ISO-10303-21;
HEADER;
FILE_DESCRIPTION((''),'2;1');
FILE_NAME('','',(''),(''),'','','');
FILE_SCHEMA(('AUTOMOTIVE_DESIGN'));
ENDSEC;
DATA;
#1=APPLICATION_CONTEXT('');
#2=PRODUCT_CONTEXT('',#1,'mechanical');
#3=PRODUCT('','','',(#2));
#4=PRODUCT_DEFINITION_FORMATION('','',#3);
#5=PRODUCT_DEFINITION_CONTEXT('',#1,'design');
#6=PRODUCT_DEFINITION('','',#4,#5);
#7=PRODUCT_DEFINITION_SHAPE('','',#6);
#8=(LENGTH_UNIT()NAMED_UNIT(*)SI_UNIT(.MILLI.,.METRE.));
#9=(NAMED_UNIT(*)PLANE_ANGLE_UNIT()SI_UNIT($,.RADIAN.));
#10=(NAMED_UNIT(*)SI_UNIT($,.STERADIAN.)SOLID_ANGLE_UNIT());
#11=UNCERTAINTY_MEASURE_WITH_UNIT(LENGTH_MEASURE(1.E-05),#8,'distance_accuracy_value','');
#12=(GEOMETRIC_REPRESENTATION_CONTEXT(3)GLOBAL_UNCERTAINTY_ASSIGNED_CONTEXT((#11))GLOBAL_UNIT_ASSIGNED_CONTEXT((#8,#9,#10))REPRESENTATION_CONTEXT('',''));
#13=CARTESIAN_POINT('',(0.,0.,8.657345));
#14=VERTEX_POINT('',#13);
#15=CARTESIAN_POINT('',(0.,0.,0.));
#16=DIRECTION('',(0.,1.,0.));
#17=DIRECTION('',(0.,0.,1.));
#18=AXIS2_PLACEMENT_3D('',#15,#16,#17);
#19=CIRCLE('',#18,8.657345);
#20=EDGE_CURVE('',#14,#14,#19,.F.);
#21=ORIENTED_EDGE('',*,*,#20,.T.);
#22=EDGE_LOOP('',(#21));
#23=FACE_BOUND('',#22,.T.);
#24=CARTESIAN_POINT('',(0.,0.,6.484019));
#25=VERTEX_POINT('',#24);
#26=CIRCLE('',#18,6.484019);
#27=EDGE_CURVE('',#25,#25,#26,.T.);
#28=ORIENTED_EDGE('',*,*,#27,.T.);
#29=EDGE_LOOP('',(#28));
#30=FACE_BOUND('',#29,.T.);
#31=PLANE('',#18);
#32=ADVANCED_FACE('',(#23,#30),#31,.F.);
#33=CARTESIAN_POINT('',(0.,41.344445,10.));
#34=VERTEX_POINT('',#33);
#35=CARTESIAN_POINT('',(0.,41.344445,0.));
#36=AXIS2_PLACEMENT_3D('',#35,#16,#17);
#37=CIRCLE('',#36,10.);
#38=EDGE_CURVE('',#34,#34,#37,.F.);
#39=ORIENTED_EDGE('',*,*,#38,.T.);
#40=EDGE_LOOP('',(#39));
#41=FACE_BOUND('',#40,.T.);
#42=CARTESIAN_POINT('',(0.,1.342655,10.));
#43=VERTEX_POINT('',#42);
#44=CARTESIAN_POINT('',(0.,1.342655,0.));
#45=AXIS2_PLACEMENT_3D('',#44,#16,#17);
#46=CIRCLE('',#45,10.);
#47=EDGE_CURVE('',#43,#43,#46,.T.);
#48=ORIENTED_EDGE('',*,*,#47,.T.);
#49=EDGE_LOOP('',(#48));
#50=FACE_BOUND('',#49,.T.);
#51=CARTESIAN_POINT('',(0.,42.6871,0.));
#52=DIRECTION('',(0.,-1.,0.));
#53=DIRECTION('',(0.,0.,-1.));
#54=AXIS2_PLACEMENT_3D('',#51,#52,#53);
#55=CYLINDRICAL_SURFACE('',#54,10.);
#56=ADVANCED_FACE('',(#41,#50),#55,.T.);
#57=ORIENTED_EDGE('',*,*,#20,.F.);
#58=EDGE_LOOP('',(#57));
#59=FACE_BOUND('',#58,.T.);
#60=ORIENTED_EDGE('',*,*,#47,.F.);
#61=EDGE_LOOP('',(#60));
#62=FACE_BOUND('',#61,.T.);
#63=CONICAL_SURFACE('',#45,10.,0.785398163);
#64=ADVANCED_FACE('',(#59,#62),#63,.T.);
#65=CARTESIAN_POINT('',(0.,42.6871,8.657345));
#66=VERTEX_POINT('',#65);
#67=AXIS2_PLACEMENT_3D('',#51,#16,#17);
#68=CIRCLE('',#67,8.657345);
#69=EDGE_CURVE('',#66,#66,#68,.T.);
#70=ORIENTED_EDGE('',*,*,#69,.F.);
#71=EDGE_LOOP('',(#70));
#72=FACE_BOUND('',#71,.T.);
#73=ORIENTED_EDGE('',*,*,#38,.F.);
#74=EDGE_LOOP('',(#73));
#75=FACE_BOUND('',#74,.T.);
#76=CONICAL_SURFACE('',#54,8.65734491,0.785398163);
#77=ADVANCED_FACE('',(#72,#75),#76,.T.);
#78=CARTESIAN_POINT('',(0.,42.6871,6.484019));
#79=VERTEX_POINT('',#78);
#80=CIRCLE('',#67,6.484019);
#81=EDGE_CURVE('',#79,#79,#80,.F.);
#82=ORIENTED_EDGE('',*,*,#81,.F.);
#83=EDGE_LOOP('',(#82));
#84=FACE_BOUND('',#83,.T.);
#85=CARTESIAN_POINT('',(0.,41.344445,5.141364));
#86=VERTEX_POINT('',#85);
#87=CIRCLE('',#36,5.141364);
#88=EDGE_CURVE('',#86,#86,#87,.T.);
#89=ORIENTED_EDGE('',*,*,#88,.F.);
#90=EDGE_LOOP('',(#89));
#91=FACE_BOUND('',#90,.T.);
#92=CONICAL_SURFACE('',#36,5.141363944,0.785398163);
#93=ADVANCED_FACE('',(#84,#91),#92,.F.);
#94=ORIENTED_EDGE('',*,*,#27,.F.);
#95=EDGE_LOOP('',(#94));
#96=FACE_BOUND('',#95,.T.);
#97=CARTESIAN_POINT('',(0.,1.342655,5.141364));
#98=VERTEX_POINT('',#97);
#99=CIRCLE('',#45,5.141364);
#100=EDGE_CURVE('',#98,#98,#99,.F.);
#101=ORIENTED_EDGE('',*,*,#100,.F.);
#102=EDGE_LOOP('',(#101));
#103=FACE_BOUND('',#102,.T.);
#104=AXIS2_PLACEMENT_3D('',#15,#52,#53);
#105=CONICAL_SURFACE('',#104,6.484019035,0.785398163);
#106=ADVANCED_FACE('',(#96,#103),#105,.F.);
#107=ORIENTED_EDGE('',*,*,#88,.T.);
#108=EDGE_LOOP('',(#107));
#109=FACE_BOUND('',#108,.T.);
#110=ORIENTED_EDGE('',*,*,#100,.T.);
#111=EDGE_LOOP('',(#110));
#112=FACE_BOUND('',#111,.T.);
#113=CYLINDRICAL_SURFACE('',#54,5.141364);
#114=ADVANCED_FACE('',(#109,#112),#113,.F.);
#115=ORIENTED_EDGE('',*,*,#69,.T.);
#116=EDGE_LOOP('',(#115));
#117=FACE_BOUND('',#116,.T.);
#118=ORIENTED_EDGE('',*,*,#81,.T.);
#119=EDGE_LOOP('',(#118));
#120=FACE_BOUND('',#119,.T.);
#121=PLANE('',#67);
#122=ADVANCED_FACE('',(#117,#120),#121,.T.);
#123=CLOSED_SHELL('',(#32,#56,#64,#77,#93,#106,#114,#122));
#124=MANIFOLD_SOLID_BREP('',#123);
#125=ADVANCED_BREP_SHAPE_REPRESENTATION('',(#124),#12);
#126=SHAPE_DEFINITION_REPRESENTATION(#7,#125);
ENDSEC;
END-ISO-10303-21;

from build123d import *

# Parameters (mm, degrees)
SKETCH1_R           = 10
BOSS_EXTRUDE1_DEPTH = 42.687100032
SKETCH2_R           = 5.141363944
CUT_EXTRUDE1_DEPTH  = 45.968750362
CHAMFER1_SIZE       = 1.34265509


with BuildPart() as part:
    # Sketch1 → Boss-Extrude1 (new body)
    with BuildSketch(Plane(origin=(0, 0, 0), x_dir=(1, 0, 0), z_dir=(0, 1, 0))):
        Circle(SKETCH1_R)
    extrude(amount=BOSS_EXTRUDE1_DEPTH)

    # Sketch2 → Cut-Extrude1 (cut, through all)
    with BuildSketch(Plane(origin=(0, 0, 0), x_dir=(1, 0, 0), z_dir=(0, 1, 0))):
        Circle(SKETCH2_R)
    extrude(amount=CUT_EXTRUDE1_DEPTH, mode=Mode.SUBTRACT)

    # Chamfer1
    chamfer1_edges = [part.edges().sort_by_distance(p)[0] for p in [
        (-5.141363944, 42.687100032, 0),
        (-5.141363944, 0, 0),
        (-10, 0, 0),
        (-10, 42.687100032, 0),
    ]]
    chamfer(chamfer1_edges, length=CHAMFER1_SIZE)


solid = part.part
